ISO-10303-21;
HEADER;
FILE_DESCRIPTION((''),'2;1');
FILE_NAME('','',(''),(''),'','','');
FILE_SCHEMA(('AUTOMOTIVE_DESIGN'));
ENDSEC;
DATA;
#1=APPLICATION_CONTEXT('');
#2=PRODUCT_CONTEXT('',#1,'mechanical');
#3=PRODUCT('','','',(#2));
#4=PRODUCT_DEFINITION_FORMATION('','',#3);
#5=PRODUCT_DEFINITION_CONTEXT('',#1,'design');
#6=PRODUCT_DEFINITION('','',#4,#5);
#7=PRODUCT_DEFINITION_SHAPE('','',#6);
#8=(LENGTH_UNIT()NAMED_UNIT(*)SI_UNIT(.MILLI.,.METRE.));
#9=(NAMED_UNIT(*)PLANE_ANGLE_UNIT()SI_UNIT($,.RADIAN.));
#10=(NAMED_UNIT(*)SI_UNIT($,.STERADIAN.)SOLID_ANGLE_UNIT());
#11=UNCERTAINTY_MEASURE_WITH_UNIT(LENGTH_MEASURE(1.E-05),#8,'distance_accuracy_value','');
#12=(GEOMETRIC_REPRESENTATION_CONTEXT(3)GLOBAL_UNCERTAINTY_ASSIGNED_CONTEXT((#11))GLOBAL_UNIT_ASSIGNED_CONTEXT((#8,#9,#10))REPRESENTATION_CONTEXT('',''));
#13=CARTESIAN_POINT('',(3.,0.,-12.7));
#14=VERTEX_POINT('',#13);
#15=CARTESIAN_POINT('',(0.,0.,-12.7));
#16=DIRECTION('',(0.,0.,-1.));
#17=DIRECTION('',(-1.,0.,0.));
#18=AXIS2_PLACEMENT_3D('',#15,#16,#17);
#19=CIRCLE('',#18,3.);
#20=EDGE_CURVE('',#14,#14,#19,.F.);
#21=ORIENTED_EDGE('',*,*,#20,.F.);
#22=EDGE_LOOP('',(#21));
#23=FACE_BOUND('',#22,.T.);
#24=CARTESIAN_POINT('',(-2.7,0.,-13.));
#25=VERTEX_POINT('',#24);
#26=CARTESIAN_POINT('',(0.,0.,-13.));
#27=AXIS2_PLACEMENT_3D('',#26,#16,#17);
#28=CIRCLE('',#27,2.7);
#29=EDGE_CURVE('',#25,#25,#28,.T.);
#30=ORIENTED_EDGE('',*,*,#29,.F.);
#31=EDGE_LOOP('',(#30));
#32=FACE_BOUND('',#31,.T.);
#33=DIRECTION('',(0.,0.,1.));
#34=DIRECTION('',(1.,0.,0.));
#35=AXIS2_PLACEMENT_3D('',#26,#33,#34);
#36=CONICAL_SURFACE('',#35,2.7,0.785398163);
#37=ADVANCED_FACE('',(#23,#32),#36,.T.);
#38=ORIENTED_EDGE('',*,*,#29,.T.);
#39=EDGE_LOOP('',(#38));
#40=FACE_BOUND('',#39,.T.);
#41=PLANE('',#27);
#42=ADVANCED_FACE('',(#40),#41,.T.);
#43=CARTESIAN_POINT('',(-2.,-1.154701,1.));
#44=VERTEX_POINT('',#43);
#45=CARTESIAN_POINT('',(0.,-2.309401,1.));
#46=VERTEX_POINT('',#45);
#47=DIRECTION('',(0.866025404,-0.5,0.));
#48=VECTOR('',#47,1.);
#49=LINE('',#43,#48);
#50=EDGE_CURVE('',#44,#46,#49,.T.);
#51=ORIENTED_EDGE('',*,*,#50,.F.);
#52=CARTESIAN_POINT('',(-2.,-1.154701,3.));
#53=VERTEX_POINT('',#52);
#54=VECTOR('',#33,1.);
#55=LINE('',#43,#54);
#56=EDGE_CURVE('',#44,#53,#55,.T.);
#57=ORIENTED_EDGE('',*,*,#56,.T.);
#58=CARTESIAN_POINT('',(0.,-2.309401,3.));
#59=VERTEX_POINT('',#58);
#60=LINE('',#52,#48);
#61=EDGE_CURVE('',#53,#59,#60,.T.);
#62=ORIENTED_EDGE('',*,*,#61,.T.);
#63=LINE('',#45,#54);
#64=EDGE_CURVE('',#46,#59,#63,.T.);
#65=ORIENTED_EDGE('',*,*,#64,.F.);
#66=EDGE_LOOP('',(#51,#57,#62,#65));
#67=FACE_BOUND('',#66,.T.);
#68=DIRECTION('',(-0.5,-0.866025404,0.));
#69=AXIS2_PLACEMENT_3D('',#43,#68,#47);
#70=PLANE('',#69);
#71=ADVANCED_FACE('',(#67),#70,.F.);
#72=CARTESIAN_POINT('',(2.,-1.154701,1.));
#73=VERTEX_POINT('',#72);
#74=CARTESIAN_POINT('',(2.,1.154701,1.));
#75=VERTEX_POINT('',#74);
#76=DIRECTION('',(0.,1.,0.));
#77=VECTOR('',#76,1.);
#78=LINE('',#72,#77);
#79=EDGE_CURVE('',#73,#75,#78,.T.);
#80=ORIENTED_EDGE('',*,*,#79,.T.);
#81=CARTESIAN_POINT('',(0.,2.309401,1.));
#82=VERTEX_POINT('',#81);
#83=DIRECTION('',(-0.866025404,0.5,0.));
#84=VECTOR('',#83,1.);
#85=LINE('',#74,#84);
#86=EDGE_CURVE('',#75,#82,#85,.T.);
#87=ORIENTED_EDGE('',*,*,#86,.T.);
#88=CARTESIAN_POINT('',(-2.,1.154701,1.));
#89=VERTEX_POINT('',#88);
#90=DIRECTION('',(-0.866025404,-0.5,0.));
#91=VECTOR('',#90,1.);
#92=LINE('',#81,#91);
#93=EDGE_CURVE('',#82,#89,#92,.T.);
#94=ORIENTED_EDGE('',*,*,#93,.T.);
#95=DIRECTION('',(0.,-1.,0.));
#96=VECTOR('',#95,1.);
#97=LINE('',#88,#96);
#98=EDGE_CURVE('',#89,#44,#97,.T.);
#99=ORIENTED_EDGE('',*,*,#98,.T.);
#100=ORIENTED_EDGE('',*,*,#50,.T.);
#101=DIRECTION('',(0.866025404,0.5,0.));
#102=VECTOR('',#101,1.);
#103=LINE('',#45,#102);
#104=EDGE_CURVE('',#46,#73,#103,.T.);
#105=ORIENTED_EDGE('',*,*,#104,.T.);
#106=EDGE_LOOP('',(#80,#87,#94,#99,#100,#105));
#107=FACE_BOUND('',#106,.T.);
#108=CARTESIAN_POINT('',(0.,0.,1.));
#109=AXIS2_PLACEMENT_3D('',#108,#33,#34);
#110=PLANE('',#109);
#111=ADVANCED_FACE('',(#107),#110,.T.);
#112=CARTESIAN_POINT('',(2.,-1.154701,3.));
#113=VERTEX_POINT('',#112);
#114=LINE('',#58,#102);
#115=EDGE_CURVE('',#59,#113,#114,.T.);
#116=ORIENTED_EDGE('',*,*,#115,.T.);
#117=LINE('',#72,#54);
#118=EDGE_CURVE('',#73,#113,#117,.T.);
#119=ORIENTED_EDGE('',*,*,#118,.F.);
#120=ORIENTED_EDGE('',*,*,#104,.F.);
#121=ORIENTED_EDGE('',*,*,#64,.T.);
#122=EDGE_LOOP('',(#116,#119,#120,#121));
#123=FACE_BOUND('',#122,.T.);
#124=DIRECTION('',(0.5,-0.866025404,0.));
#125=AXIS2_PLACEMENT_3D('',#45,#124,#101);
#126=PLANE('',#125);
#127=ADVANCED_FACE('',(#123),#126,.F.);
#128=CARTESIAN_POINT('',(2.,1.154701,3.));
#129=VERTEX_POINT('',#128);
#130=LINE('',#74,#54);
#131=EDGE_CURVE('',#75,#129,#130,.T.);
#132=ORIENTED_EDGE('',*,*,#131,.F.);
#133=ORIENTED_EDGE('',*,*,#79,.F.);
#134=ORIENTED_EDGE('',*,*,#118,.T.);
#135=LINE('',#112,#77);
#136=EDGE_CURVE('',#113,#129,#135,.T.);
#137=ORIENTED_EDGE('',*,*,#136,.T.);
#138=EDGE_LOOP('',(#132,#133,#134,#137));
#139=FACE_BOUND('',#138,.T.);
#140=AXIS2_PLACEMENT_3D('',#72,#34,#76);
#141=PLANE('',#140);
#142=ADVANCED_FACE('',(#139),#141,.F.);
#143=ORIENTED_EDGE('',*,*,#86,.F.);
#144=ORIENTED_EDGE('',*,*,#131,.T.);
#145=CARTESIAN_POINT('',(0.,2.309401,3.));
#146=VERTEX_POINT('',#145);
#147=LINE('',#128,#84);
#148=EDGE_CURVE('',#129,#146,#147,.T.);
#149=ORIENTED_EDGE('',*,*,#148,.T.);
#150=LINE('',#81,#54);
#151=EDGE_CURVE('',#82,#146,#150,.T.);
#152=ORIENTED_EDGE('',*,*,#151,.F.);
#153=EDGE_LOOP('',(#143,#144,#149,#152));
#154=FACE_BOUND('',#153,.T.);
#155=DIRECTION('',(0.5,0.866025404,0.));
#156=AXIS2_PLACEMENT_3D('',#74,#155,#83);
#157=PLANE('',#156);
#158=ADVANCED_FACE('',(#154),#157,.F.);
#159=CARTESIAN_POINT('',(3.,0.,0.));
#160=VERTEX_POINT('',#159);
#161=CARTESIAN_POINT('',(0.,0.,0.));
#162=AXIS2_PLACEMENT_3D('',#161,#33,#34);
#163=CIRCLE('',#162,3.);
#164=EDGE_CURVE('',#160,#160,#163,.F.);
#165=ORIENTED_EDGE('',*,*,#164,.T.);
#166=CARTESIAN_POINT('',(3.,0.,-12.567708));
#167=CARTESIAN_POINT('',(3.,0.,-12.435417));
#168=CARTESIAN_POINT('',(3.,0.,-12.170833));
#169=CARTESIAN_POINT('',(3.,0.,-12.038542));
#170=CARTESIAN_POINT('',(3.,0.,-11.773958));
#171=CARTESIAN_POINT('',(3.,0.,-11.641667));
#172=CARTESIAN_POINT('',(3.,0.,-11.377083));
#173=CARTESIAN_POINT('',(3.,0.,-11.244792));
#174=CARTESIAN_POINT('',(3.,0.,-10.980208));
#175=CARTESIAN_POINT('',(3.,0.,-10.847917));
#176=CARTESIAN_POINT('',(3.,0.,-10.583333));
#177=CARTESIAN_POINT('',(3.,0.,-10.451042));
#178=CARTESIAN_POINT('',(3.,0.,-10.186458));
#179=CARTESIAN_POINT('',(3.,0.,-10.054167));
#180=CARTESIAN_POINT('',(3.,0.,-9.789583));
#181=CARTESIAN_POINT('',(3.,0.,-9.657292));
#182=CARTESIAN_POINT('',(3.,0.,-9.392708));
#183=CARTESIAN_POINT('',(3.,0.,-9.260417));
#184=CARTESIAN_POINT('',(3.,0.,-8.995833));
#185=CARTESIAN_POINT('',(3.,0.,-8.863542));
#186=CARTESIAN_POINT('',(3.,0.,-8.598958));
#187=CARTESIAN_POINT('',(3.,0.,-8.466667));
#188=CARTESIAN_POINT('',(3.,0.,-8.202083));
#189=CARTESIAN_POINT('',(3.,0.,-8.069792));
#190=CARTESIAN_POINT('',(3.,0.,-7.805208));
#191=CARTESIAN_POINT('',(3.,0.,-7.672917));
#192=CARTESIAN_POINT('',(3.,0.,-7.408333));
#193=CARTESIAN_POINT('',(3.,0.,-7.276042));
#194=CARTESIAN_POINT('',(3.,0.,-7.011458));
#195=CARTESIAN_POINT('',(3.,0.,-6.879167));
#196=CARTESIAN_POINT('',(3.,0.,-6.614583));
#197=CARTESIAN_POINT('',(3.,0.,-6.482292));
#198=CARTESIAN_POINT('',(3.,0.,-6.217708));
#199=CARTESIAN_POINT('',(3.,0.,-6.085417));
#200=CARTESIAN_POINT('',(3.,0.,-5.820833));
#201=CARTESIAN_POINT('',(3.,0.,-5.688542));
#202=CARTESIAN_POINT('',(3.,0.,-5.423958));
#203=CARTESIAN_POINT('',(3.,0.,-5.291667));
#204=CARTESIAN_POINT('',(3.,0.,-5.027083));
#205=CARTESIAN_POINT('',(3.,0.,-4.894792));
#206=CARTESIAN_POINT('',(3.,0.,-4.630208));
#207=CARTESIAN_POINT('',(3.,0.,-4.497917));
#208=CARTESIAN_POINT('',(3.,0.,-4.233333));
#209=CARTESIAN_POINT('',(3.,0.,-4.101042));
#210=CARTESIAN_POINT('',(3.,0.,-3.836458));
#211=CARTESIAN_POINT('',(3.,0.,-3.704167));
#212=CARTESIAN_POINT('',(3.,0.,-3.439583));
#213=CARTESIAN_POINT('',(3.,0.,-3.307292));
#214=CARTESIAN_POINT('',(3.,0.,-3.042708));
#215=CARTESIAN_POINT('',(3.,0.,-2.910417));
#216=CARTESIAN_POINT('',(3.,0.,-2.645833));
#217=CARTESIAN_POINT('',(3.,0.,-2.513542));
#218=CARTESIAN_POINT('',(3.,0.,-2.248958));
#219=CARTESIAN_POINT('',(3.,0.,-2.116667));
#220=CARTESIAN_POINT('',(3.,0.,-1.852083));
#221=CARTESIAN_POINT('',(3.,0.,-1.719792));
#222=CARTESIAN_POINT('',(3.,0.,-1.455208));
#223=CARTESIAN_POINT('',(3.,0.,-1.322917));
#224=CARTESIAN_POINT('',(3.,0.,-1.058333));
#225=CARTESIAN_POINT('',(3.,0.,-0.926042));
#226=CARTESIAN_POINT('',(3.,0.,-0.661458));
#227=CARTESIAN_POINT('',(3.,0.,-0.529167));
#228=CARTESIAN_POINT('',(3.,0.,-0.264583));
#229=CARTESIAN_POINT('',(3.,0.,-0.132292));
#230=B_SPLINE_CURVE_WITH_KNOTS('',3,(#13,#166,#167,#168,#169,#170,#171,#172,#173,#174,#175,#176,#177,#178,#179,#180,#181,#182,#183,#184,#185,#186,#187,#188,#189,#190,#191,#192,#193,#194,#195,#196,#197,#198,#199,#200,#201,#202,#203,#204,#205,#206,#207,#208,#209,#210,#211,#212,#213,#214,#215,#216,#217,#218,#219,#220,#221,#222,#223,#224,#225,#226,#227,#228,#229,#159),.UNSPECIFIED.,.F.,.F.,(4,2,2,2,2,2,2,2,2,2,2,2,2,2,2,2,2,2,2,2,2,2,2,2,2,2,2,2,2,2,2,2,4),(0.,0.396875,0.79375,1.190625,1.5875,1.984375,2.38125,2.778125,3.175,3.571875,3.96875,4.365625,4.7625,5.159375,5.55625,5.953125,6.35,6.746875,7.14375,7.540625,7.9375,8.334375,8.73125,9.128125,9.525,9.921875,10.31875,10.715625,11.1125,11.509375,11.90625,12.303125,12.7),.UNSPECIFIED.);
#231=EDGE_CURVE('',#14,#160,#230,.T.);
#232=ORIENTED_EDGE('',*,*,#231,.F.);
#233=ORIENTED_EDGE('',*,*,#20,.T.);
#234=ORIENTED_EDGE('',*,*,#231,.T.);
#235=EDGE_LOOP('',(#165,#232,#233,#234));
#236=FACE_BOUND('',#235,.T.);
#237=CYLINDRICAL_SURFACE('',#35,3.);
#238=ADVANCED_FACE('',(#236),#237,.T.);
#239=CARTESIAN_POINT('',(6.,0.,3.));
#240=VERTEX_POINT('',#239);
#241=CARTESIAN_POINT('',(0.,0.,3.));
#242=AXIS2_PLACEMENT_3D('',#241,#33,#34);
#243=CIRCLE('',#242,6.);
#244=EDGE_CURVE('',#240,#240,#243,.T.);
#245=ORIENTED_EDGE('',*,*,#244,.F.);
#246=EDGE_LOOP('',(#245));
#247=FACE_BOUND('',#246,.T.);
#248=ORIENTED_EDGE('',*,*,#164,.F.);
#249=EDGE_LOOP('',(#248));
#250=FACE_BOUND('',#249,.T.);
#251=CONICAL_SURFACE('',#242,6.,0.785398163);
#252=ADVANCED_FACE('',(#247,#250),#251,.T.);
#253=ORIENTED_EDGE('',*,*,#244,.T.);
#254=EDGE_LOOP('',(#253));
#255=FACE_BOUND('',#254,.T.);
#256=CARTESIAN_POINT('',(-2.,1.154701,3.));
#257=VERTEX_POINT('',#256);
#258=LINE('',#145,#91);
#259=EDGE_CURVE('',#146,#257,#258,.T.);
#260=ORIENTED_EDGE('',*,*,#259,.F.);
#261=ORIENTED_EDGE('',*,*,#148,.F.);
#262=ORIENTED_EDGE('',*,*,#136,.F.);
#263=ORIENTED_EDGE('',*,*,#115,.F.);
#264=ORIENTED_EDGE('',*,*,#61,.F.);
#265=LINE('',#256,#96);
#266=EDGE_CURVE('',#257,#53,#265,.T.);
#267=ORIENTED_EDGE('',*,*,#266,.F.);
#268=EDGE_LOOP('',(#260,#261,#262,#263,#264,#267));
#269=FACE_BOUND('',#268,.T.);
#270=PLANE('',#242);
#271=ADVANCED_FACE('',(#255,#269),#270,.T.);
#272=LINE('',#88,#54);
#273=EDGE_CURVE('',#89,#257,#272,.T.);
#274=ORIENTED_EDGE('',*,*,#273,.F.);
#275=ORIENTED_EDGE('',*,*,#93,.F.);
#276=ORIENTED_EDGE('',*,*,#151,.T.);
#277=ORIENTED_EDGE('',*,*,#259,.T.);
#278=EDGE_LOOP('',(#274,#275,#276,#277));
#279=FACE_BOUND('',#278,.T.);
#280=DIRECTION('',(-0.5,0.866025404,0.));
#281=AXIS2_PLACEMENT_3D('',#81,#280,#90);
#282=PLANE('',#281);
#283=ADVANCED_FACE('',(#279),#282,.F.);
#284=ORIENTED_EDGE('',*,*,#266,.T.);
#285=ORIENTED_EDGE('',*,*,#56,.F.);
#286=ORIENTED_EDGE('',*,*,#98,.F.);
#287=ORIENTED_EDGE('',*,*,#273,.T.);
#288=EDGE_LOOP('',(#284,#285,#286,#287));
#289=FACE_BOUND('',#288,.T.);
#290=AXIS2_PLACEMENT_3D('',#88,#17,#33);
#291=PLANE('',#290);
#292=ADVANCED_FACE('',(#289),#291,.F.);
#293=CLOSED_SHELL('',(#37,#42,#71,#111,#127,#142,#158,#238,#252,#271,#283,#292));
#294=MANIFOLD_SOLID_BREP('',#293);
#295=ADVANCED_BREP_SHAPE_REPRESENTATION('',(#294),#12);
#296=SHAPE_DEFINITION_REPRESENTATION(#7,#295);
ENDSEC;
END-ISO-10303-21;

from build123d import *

# Parameters (mm, degrees)
SKETCH1_R           = 6
BOSS_EXTRUDE1_DEPTH = 3
SKETCH2_R           = 3
BOSS_EXTRUDE2_DEPTH = 13
CHAMFER1_SIZE       = 0.3
CUT_EXTRUDE1_DEPTH  = 2
CHAMFER2_SIZE       = 3


with BuildPart() as part:
    # Sketch1 → Boss-Extrude1 (new body)
    with BuildSketch(Plane.XY):
        Circle(SKETCH1_R)
    extrude(amount=BOSS_EXTRUDE1_DEPTH)

    # Sketch2 → Boss-Extrude2 (add)
    with BuildSketch(Plane(origin=(0, 0, 0), x_dir=(-1, 0, 0), z_dir=(0, 0, -1))):
        with Locations(Location((0, 0, 0), (0, 0, 180))):
            Circle(SKETCH2_R)
    extrude(amount=BOSS_EXTRUDE2_DEPTH)

    # Chamfer1
    chamfer1_edges = [part.edges().sort_by_distance(p)[0] for p in [
        (-3, 0, -13),
    ]]
    chamfer(chamfer1_edges, length=CHAMFER1_SIZE)

    # Sketch3 → Cut-Extrude1 (cut)
    with BuildSketch(Plane.XY.offset(3)):
        Polygon((0, 2.309401077), (-2, 1.154700538), (-2, -1.154700538), (0, -2.309401077), (2, -1.154700538), (2, 1.154700538), align=None)
    extrude(amount=-CUT_EXTRUDE1_DEPTH, mode=Mode.SUBTRACT)

    # Chamfer2
    chamfer2_edges = [part.edges().sort_by_distance(p)[0] for p in [
        (-6, 0, 0),
    ]]
    chamfer(chamfer2_edges, length=CHAMFER2_SIZE - 0.0001)  # a hair under: the kernel refuses the full size


solid = part.part
